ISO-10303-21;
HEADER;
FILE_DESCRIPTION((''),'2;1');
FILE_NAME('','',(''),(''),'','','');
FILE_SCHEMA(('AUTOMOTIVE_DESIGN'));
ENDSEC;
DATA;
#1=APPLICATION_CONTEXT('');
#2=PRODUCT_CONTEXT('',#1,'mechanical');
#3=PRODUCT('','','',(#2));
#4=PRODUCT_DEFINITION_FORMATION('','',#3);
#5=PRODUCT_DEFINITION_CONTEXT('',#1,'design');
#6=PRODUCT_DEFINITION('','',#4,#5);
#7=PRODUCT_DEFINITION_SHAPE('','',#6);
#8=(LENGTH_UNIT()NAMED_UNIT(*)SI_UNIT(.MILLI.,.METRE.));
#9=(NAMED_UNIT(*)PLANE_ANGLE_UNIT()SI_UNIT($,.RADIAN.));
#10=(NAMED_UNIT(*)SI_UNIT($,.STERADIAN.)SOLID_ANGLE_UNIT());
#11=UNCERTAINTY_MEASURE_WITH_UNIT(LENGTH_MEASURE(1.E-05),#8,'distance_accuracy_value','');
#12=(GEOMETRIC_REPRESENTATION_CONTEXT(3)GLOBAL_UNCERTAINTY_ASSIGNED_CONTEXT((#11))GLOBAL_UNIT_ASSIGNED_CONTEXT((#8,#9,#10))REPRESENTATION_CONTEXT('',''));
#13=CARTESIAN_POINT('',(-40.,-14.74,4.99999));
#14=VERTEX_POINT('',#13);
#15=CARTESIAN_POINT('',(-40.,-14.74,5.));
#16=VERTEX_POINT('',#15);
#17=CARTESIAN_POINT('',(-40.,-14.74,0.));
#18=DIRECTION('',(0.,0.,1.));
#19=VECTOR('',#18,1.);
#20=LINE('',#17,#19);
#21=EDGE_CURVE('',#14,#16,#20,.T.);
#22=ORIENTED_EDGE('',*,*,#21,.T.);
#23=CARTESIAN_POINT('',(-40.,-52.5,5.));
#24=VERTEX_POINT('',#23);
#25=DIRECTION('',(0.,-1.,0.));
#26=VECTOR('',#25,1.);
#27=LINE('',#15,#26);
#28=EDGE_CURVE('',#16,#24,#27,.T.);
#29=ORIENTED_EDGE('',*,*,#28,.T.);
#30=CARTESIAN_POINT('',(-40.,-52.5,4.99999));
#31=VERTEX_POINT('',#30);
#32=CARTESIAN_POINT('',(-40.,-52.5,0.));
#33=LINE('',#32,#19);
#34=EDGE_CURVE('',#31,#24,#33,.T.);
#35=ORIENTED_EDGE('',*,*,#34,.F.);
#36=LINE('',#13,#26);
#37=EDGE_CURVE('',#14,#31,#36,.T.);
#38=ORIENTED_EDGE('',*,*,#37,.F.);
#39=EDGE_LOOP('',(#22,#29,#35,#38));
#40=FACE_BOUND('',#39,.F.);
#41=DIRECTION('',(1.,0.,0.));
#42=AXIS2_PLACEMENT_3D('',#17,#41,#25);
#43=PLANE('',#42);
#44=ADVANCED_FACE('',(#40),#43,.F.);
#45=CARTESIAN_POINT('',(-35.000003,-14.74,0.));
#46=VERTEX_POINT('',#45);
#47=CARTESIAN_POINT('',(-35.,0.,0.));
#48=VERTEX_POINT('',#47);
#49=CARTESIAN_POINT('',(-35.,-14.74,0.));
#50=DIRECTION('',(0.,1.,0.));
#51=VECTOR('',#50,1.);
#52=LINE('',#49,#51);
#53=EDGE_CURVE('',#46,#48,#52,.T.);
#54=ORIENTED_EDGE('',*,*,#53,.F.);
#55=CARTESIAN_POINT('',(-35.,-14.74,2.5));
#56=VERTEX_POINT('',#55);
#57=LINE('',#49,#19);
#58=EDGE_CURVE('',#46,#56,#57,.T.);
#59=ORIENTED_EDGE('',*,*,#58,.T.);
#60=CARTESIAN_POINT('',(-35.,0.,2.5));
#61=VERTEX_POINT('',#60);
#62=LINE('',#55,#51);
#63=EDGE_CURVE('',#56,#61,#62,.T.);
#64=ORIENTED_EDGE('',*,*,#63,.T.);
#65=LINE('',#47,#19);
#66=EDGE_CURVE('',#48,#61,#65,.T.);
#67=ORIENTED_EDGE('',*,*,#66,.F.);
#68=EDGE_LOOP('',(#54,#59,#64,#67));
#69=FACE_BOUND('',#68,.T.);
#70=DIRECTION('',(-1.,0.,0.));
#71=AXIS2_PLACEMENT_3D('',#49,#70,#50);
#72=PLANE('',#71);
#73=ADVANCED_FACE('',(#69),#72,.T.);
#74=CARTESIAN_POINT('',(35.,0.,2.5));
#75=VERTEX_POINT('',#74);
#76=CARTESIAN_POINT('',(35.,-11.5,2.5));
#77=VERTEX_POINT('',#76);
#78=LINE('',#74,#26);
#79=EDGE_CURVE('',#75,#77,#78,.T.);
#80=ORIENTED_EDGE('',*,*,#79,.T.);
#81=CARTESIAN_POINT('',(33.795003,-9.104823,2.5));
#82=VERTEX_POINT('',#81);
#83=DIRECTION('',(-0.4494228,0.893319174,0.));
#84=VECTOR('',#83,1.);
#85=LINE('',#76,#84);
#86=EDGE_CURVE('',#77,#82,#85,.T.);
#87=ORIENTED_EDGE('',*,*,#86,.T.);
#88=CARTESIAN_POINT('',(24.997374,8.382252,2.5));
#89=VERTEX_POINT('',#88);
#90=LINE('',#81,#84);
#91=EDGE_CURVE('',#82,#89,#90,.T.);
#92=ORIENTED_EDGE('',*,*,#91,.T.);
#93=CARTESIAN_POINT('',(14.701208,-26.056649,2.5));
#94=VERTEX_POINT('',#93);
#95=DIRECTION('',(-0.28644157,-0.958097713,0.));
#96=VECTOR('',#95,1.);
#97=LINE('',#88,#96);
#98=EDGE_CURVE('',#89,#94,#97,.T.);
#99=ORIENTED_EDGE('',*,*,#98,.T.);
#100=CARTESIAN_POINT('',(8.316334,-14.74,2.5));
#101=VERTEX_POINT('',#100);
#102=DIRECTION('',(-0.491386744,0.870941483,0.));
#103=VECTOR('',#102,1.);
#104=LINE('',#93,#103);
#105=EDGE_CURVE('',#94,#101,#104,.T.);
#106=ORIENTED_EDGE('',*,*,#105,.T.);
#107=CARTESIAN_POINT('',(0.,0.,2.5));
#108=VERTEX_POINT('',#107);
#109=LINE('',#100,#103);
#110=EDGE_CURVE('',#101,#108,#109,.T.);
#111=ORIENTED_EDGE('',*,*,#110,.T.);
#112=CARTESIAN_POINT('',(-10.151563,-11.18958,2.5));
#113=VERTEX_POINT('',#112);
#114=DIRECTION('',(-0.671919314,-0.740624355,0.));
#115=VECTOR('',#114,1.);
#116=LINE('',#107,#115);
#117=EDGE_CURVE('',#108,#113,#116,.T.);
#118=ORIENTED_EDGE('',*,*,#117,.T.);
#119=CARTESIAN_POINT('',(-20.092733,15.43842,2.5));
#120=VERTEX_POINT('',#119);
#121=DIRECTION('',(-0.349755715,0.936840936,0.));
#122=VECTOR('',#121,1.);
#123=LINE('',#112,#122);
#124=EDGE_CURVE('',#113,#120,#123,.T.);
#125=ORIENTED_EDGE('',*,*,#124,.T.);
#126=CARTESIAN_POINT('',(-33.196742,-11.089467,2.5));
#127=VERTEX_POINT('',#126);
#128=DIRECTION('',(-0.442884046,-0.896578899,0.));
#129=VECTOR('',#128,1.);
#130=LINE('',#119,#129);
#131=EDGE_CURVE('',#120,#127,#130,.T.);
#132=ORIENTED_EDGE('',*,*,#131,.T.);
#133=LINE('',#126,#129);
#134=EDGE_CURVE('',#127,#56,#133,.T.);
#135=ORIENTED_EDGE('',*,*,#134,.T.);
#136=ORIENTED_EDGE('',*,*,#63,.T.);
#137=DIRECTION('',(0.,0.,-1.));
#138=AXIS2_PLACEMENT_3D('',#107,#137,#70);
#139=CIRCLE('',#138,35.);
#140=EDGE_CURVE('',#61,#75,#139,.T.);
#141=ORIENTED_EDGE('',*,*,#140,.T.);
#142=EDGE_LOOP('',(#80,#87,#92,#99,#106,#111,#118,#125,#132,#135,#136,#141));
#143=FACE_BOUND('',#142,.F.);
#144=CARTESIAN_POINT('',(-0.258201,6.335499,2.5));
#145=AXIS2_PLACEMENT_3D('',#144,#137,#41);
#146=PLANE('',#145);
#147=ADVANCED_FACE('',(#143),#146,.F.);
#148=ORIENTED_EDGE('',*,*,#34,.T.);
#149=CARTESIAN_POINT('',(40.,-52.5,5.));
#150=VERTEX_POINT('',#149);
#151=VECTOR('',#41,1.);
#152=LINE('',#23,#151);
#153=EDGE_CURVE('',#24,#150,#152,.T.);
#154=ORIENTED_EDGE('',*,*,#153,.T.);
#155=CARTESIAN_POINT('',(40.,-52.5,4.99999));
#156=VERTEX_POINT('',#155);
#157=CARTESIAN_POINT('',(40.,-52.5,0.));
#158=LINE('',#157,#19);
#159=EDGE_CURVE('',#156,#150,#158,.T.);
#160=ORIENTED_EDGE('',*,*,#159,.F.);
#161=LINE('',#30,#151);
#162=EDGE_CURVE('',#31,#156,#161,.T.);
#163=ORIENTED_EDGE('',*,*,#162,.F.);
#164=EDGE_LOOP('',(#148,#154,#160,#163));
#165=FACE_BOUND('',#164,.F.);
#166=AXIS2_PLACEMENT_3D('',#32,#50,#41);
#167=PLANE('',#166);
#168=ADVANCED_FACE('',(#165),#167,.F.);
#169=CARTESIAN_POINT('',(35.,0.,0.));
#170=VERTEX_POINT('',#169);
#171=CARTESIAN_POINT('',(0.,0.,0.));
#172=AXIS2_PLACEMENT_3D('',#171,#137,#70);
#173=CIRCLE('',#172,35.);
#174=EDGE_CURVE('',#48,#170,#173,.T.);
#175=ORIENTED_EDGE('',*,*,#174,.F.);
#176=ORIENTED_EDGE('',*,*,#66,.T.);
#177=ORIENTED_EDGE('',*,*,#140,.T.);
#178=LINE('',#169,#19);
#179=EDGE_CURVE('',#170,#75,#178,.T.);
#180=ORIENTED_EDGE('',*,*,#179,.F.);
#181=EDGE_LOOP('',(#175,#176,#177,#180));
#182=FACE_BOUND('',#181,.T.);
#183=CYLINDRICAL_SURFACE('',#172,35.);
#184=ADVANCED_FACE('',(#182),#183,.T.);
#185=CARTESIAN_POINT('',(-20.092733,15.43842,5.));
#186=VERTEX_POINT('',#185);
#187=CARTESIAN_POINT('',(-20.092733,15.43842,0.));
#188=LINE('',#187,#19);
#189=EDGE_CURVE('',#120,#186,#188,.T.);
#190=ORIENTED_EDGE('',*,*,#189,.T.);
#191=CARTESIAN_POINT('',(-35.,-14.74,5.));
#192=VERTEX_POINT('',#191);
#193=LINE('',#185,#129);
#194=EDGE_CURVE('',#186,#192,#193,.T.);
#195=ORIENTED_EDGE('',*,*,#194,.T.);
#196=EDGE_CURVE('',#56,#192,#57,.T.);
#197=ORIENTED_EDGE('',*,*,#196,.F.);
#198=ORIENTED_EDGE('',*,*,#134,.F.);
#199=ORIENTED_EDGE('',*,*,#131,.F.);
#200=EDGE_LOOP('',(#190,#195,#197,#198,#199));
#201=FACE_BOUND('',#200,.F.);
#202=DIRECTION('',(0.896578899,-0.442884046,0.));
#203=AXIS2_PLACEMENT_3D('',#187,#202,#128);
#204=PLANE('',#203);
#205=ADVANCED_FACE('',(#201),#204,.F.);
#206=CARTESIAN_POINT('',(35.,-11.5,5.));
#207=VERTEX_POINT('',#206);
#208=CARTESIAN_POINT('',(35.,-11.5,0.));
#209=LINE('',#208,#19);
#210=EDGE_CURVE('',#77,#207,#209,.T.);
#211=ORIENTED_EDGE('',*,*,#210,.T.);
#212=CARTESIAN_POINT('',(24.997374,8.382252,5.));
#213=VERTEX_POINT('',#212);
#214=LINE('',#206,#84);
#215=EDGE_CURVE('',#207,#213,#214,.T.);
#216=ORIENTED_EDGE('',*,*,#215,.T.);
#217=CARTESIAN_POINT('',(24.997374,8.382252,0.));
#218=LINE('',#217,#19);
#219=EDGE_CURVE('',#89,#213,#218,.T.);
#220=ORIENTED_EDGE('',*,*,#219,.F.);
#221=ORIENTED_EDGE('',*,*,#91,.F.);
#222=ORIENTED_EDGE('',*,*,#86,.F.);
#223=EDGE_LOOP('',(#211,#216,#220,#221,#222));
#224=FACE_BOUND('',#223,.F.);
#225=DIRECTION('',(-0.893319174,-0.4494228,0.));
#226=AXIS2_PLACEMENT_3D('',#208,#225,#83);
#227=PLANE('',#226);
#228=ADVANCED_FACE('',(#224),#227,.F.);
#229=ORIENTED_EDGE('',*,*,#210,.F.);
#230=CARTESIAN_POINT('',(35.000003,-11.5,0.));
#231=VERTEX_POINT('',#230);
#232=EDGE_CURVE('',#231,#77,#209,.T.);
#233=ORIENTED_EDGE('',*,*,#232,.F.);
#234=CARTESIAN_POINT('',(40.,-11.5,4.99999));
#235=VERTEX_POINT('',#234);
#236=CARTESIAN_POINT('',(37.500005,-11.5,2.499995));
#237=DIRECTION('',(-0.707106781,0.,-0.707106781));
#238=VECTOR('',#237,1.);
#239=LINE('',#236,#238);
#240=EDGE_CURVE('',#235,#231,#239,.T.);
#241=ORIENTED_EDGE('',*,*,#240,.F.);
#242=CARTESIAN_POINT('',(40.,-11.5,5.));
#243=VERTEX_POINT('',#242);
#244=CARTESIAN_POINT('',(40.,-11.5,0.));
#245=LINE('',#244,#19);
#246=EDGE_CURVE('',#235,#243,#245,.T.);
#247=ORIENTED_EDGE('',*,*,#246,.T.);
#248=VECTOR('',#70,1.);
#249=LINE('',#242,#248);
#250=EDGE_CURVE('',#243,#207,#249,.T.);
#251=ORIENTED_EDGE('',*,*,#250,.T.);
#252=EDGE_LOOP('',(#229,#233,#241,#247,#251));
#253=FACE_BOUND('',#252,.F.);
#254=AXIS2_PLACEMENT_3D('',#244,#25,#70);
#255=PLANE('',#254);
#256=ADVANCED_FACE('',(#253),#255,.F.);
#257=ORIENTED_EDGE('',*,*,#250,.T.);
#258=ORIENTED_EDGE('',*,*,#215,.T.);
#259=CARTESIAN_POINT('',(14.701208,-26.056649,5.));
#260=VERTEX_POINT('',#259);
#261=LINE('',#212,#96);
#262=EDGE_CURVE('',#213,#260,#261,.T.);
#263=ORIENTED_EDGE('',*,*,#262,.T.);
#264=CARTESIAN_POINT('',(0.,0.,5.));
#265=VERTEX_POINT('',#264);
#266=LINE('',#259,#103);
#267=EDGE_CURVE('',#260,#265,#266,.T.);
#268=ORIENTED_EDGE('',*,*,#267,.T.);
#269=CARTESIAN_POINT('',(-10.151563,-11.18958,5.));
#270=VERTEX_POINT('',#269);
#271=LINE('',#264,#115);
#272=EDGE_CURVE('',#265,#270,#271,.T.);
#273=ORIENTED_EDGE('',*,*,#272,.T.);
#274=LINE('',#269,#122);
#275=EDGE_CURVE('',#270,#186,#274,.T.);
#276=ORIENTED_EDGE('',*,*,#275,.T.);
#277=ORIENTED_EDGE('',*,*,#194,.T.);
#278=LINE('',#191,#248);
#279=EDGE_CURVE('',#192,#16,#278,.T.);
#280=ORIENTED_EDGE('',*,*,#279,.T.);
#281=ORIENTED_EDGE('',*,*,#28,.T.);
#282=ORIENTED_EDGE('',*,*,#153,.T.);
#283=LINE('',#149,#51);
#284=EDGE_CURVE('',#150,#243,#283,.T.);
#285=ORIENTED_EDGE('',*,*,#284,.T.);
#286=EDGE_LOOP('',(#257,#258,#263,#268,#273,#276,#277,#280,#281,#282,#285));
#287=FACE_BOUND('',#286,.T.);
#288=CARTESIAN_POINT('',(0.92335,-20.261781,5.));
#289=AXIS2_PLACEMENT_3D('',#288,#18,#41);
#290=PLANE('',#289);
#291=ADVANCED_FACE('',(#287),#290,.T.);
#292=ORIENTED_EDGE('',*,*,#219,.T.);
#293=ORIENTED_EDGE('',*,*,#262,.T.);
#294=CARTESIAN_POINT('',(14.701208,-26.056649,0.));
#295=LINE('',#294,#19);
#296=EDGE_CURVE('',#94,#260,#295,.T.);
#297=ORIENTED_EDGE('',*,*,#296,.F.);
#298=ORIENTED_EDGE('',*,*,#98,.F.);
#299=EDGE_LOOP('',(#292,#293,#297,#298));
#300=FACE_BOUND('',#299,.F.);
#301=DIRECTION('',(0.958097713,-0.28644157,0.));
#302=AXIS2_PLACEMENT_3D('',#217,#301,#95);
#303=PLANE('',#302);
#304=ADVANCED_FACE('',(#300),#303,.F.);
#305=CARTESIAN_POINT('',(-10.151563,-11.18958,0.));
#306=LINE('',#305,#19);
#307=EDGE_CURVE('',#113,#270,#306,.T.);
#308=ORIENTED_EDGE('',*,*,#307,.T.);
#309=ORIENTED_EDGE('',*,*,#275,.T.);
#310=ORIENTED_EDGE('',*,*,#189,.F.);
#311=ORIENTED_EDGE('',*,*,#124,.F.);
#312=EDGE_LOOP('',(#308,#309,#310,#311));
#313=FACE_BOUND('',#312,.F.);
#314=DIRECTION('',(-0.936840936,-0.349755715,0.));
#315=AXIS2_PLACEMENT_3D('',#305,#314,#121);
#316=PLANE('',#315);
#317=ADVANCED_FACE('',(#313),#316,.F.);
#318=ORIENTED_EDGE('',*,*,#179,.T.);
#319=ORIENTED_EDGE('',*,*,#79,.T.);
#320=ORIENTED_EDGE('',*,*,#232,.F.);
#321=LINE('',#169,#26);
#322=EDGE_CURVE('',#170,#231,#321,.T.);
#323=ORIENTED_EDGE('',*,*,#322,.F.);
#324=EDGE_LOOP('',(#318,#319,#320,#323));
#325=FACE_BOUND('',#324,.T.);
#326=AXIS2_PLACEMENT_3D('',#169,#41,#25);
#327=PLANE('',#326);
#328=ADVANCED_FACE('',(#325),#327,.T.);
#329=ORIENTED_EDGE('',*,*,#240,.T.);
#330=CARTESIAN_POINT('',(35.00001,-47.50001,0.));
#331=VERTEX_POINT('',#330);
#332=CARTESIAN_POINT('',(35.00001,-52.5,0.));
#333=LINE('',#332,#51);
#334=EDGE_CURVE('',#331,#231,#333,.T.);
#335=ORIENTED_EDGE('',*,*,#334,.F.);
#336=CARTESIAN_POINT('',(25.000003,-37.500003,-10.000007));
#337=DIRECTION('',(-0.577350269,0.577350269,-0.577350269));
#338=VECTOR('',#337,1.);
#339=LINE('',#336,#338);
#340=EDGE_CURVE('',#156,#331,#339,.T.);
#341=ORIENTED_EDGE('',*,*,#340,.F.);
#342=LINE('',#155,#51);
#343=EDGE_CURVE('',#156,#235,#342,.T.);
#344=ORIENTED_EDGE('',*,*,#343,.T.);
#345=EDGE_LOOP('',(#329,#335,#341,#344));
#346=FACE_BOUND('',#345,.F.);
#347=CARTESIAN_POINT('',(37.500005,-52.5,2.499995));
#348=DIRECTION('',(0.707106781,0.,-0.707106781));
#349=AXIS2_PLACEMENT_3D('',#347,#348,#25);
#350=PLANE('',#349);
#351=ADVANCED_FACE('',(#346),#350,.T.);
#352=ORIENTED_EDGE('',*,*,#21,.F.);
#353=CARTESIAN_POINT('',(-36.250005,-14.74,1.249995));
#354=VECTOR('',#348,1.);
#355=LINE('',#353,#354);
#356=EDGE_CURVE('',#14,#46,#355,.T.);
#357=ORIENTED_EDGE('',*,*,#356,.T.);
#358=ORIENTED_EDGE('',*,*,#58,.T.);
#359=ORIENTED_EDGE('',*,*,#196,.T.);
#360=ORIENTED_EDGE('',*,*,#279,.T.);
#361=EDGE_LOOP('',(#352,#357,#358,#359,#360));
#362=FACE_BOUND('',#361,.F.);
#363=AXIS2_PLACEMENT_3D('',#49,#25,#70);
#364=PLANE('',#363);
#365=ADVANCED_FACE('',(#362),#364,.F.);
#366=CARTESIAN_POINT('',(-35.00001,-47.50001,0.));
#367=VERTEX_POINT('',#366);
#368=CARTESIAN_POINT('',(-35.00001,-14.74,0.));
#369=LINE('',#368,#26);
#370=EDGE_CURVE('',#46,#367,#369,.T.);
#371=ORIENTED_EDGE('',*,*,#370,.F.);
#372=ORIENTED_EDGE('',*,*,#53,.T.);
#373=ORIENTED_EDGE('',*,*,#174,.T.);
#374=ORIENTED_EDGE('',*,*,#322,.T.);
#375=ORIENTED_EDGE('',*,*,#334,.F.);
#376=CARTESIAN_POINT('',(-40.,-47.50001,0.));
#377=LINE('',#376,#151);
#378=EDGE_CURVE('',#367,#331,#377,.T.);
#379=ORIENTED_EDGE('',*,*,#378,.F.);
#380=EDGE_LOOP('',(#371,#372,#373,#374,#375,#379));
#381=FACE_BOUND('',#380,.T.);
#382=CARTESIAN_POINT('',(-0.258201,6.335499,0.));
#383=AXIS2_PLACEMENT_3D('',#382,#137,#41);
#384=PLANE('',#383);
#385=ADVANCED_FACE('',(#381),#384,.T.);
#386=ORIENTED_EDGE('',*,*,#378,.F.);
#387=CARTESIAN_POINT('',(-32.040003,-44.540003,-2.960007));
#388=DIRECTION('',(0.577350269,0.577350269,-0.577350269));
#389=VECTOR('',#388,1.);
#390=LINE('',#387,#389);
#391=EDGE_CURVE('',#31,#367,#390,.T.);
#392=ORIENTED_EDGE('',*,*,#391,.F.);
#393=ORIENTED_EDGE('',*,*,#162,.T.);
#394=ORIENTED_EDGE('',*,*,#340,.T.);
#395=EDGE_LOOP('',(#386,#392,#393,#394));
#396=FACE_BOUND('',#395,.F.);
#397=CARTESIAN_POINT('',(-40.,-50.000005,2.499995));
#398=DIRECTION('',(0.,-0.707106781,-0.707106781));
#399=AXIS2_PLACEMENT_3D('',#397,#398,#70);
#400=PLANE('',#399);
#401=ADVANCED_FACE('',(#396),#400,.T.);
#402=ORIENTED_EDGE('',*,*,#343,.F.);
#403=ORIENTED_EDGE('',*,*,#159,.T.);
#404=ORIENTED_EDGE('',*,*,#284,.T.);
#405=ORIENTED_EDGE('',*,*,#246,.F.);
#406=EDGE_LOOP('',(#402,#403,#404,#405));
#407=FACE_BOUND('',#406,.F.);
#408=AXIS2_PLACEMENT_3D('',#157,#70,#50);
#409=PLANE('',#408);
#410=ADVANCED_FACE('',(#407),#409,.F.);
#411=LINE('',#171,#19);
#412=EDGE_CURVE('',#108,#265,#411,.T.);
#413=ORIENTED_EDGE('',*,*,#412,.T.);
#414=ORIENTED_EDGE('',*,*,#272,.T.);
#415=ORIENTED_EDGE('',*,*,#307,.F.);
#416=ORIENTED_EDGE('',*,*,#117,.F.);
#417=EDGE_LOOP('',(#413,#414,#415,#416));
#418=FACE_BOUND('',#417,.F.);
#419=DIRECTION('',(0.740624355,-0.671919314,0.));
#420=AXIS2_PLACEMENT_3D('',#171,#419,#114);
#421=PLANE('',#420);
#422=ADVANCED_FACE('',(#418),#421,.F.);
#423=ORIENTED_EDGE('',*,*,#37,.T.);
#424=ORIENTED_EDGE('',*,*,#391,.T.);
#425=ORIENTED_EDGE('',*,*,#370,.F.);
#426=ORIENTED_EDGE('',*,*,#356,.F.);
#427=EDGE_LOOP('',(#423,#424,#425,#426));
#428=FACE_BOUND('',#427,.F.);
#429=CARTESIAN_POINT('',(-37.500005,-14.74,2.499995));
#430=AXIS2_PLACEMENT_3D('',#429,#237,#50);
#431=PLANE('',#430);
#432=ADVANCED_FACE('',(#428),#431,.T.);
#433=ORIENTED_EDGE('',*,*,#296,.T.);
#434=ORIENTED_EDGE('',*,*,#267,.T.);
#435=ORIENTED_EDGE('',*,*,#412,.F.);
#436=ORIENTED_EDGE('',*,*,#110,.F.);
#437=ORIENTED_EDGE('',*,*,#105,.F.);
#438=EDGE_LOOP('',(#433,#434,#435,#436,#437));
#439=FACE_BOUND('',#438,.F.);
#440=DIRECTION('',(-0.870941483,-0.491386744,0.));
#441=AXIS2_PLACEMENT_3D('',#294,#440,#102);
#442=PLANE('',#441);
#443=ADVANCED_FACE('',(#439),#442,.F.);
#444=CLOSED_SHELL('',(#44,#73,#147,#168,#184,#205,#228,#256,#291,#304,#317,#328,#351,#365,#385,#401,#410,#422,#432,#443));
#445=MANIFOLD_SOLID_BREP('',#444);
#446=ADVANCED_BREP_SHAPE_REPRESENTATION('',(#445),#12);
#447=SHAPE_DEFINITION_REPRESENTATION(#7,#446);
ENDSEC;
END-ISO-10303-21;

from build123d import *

# Parameters (mm, degrees)
F1_DEPTH = 5
F2_SIZE  = 4.99999
F4_DEPTH = 2.5


# Not quite as in the source:
# - a fillet or chamfer is up to 0.001 mm smaller than in the source, because OpenCascade refuses the exact size


with BuildPart() as f1:
    # F0 (on Top) → F1 (new body)
    with BuildSketch(Plane.XY):
        Polygon((-35, -47.5), (35, -47.5), (35, -11.5), (24.9973740429, 8.3822524399), (14.7012080997, -26.056649141), (0, 0), (-10.1515629949, -11.1895798258), (-20.0927332044, 15.4384202456), (-35, -14.74), align=None)
        Polygon((35, -11.5), (35, -47.5), (-35, -47.5), (-35, -14.74), (-40, -14.74), (-40, -52.5), (40, -52.5), (40, -11.5), align=None)
    extrude(amount=F1_DEPTH)

    # F2 (size 5 in the source; OpenCascade refuses exactly that, so slightly less here)
    f2_edges = [f1.edges().sort_by_distance(p)[0] for p in [
        (40, -32, 0),
        (0, -52.5, 0),
        (-40, -33.62, 0),
    ]]
    chamfer(f2_edges, length=F2_SIZE)

    # F3 (on face) → F4 (join)
    with BuildSketch(Plane(origin=(0, 0, 0), x_dir=(1, 0, 0), z_dir=(0, 0, -1))):
        with BuildLine():
            ThreePointArc((-33.1967424913, 11.0894674339), (-34.5462442763, 5.6175623185), (-35, 0))
            ThreePointArc((-35, 0), (0, -35), (35, 0))
            ThreePointArc((35, 0), (34.6974429309, 4.5921078013), (33.7950026252, 9.1048227638))
            Line((33.7950026252, 9.1048227638), (24.9973740429, -8.3822524399))
            Line((24.9973740429, -8.3822524399), (18.0845360262, 14.74))
            Line((18.0845360262, 14.74), (8.3163343919, 14.74))
            Line((8.3163343919, 14.74), (0, 0))
            Line((0, 0), (-10.1515629949, 11.1895798258))
            Line((-10.1515629949, 11.1895798258), (-20.0927332044, -15.4384202456))
            Line((-20.0927332044, -15.4384202456), (-33.1967424913, 11.0894674339))
        make_face()
        Polygon((14.7012080997, 26.056649141), (8.3163343919, 14.74), (18.0845360262, 14.74), align=None)
        with BuildLine():
            Line((-35, 14.74), (-35, 0))
            ThreePointArc((-35, 0), (-34.5462442763, 5.6175623185), (-33.1967424913, 11.0894674339))
            Line((-33.1967424913, 11.0894674339), (-35, 14.74))
        make_face()
        with BuildLine():
            ThreePointArc((33.7950026252, 9.1048227638), (34.6974429309, 4.5921078013), (35, 0))
            Line((35, 0), (35, 11.5))
            Line((35, 11.5), (33.7950026252, 9.1048227638))
        make_face()
    extrude(amount=-F4_DEPTH)


solid = f1.part
